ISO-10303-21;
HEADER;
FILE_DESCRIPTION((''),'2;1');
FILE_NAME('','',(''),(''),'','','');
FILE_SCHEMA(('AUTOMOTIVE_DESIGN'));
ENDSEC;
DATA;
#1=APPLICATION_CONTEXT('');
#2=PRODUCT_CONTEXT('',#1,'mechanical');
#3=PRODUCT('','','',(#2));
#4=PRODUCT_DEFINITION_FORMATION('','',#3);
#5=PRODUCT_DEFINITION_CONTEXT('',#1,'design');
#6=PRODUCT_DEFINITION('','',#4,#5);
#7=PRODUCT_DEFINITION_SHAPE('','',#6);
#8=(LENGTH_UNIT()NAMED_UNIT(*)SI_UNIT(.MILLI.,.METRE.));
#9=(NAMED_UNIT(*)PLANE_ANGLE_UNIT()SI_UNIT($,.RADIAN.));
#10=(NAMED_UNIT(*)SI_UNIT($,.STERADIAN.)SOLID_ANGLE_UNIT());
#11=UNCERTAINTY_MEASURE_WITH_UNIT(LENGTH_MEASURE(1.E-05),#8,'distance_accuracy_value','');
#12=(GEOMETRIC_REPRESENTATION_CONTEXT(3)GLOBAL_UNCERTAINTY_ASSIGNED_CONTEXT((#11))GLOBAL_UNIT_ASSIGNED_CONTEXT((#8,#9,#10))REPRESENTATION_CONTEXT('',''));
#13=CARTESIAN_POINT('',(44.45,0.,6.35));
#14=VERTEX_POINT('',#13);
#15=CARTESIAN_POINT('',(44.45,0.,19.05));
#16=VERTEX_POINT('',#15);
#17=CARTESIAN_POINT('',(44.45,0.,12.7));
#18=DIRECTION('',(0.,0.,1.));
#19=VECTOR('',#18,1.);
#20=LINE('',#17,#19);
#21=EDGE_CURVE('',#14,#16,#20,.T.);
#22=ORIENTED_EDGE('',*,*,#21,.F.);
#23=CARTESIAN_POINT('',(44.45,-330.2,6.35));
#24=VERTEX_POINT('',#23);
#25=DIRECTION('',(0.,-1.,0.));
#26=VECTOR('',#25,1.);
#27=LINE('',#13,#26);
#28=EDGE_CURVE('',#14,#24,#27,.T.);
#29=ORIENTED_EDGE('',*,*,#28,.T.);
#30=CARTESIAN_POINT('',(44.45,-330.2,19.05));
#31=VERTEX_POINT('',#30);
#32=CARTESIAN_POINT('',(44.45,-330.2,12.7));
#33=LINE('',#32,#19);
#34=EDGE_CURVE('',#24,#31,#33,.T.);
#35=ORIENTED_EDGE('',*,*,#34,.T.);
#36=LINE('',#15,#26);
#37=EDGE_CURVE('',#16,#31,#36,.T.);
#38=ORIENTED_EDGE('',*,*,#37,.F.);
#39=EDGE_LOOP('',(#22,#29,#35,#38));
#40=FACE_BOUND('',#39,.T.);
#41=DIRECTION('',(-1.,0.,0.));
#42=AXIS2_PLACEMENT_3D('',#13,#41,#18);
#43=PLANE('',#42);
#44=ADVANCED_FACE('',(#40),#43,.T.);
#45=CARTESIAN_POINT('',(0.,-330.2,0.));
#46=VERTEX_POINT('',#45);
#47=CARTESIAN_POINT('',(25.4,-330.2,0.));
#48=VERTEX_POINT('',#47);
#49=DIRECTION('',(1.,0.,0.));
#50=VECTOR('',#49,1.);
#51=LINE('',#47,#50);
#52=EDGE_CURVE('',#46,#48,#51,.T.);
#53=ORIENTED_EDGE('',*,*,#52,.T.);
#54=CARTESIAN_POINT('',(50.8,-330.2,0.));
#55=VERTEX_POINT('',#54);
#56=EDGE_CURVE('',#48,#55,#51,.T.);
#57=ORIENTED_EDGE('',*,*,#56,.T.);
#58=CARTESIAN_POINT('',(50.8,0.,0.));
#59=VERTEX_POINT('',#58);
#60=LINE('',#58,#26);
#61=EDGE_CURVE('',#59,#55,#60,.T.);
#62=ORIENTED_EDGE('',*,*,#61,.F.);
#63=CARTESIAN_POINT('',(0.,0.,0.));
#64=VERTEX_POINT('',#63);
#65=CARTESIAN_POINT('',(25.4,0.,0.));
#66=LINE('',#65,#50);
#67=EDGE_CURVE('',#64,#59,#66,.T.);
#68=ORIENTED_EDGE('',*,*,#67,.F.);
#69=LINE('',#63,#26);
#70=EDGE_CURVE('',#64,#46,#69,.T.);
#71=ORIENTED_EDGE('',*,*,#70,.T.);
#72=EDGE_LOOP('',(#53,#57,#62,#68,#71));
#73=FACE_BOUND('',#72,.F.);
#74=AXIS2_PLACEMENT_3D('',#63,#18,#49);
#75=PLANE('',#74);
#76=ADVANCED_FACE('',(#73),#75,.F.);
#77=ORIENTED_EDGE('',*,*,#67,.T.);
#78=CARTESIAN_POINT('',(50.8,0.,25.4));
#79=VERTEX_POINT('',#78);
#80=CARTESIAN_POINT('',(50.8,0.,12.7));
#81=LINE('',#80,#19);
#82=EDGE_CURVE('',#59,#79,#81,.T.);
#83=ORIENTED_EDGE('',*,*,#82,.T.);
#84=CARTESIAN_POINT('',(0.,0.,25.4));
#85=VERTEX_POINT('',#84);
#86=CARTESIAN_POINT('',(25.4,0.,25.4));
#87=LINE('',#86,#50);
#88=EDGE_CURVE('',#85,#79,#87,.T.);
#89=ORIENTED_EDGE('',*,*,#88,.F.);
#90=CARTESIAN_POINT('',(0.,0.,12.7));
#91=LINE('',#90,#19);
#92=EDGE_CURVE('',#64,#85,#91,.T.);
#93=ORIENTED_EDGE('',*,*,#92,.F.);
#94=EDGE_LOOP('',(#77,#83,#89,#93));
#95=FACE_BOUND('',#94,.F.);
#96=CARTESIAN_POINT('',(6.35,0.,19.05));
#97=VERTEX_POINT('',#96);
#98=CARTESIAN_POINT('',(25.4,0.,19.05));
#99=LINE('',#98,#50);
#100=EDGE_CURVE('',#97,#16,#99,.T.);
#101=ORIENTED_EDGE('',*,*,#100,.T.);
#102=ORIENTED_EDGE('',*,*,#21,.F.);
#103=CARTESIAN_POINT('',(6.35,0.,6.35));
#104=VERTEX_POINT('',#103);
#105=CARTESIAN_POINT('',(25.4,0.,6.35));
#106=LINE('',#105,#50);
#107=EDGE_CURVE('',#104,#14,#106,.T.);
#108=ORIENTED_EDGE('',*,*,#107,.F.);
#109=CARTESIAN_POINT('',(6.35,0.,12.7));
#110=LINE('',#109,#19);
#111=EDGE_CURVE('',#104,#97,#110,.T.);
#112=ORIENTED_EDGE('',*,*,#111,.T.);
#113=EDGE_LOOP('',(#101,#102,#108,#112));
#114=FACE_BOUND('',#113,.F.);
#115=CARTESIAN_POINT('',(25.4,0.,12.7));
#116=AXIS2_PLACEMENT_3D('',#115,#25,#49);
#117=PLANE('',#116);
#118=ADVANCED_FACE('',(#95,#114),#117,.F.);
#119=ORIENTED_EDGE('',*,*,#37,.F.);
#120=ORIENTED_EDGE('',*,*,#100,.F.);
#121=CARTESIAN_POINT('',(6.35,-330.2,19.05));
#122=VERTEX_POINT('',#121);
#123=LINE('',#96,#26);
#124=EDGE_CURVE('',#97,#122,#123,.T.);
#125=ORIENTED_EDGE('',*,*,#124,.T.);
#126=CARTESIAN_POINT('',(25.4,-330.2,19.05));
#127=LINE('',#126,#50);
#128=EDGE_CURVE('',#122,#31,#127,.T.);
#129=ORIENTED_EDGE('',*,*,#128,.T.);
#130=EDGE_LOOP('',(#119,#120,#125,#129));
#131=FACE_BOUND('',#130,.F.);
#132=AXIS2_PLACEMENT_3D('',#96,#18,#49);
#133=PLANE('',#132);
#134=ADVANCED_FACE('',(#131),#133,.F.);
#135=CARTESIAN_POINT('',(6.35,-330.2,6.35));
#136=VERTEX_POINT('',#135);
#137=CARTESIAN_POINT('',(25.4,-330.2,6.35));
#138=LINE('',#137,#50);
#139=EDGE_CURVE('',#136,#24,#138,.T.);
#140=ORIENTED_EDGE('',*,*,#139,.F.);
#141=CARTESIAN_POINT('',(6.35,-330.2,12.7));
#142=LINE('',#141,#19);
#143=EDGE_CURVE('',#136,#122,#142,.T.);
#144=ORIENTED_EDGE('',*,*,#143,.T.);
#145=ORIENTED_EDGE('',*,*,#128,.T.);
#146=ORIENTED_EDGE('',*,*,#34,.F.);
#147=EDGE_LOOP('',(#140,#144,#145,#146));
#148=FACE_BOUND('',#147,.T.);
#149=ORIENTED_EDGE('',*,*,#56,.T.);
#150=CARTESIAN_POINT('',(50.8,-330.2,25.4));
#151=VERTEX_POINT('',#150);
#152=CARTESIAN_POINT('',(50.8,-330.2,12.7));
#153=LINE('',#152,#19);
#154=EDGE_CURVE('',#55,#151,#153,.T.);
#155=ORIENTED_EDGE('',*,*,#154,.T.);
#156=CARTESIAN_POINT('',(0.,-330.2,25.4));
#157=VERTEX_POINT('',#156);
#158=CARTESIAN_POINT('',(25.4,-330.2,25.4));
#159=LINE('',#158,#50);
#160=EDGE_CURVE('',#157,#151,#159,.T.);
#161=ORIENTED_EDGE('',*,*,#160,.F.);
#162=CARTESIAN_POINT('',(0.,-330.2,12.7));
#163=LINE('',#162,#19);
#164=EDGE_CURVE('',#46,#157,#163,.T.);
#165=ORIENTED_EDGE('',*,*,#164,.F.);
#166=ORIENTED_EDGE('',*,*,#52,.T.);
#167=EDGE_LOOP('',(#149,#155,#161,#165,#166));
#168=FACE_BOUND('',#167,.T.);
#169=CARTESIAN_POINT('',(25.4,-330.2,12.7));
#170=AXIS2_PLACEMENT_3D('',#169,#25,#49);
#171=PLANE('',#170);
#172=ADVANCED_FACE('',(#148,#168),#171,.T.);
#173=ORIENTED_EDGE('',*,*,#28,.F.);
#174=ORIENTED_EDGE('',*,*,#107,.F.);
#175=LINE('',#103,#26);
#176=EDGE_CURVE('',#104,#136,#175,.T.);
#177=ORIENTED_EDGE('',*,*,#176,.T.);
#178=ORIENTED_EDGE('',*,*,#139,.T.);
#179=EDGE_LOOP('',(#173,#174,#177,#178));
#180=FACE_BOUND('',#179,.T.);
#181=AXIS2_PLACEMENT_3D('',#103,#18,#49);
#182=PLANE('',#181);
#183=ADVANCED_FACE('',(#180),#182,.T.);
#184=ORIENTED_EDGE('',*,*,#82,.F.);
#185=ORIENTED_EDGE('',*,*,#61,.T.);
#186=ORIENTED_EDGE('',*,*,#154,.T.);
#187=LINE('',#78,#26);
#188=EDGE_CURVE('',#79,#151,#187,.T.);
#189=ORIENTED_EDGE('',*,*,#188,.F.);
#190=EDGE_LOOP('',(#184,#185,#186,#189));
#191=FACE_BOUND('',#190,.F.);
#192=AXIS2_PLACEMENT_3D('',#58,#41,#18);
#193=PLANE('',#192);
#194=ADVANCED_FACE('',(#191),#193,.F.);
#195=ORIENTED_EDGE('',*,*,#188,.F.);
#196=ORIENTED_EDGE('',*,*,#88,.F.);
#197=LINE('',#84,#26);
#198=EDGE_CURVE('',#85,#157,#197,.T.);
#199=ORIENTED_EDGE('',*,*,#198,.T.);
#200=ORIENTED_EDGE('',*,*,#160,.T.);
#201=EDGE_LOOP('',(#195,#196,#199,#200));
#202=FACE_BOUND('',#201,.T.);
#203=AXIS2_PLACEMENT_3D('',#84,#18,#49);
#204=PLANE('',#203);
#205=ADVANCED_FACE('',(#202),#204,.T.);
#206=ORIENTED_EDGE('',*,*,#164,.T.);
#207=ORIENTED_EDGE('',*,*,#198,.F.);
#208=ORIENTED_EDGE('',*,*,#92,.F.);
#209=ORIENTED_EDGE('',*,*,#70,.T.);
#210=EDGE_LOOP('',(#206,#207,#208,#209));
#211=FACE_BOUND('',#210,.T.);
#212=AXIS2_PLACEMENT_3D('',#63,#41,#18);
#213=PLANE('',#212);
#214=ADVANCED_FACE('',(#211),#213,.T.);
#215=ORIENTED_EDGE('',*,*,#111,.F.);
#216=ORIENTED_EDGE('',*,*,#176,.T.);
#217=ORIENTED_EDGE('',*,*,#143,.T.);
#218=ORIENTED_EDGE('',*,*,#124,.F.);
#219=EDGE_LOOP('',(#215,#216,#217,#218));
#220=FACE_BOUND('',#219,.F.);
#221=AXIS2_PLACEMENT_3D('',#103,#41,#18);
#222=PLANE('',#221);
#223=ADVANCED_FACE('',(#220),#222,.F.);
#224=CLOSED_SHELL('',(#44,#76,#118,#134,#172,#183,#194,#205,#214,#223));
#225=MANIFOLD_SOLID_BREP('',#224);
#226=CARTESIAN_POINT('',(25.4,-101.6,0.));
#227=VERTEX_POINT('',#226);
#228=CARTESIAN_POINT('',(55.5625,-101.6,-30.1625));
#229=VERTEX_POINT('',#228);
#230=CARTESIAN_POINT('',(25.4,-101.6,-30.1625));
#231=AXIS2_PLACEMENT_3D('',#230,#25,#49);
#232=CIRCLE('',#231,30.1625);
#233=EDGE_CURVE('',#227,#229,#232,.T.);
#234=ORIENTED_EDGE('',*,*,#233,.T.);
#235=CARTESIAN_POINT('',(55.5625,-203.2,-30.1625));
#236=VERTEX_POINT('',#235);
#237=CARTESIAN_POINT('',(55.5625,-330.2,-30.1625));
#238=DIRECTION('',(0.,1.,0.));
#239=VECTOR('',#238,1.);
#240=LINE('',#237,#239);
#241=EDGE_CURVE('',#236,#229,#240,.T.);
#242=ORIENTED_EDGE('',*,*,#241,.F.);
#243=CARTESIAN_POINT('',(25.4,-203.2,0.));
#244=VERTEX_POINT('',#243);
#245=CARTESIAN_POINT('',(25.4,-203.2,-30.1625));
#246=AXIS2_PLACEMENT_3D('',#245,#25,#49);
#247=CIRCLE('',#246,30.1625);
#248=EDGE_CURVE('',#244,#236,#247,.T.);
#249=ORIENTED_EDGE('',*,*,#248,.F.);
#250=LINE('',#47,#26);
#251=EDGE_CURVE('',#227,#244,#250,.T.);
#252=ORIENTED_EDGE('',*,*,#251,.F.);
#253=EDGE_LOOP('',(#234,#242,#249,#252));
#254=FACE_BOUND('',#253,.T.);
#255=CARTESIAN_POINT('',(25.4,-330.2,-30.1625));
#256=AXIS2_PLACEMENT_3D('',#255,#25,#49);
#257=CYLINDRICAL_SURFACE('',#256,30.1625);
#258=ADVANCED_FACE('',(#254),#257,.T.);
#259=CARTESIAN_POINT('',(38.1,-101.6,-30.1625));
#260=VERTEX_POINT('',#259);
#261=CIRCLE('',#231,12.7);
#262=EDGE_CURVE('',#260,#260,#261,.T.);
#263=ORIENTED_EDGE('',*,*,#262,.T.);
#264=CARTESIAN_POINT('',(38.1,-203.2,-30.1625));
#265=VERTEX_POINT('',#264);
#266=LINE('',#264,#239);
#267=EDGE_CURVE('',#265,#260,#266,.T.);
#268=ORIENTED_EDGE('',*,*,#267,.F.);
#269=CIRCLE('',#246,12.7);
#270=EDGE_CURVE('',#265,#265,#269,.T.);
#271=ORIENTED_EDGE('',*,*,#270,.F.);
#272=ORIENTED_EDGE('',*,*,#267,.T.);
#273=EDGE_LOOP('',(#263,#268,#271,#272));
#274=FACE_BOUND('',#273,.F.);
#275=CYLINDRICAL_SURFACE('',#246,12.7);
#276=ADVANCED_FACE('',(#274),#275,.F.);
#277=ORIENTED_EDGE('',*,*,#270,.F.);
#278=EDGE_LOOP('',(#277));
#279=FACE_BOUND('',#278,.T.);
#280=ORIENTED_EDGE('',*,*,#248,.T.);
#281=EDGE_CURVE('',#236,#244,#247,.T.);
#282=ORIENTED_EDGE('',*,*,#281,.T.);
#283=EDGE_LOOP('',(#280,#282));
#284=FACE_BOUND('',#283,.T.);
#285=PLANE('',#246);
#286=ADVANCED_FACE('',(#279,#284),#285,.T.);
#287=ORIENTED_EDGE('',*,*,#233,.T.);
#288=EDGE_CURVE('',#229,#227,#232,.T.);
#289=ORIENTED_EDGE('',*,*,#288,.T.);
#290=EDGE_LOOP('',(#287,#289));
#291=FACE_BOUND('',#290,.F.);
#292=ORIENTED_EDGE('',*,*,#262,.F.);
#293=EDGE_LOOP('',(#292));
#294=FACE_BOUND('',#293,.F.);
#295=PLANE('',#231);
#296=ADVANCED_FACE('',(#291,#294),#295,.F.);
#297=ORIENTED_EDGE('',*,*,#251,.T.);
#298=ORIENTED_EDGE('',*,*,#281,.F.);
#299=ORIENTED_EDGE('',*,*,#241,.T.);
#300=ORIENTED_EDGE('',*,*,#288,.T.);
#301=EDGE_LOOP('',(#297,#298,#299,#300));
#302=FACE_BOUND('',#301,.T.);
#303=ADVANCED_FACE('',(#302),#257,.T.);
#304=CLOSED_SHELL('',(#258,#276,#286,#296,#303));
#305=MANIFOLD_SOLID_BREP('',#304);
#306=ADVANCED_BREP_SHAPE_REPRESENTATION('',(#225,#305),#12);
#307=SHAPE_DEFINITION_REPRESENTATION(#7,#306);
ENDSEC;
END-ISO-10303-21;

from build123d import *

# Parameters (mm, degrees)
F0_W     = 50.8
F0_H     = 25.4
F0_W_2   = 38.1
F0_H_2   = 12.7
F1_DEPTH = 330.2
F2_R     = 30.1625
F3_DEPTH = 228.6
F4_R     = 30.1625
F5_DEPTH = 127
F6_R     = 12.7
F7_DEPTH = 101.6


# Not quite as in the source:
# - a feature names something its author has since deleted; it is built from what else it names


with BuildPart() as f1:
    # F0 (on Front) → F1 (new body)
    with BuildSketch(Plane.XZ):
        with Locations((25.4, 12.7)):
            Rectangle(F0_W, F0_H)
        with Locations((25.4, 12.7)):
            Rectangle(F0_W_2, F0_H_2, mode=Mode.SUBTRACT)
    extrude(amount=F1_DEPTH)

    # F2 (on face) → F3 (join)
    with BuildSketch(Plane.XZ.offset(330.2)):
        with Locations((25.4, -30.1625)):
            Circle(F2_R)
    extrude(amount=-F3_DEPTH)

    # F4 (on face) → F5 (cut)
    with BuildSketch(Plane.XZ.offset(330.2)):
        with Locations((25.4, -30.1625)):
            Circle(F4_R)
    extrude(amount=-F5_DEPTH, mode=Mode.SUBTRACT)

    # F6 (on face) → F7 (cut, through all)
    with BuildSketch(Plane.XZ.offset(203.2)):
        with Locations((25.4, -30.1625)):
            Circle(F6_R)
    extrude(amount=-F7_DEPTH, mode=Mode.SUBTRACT)


solid = f1.part
